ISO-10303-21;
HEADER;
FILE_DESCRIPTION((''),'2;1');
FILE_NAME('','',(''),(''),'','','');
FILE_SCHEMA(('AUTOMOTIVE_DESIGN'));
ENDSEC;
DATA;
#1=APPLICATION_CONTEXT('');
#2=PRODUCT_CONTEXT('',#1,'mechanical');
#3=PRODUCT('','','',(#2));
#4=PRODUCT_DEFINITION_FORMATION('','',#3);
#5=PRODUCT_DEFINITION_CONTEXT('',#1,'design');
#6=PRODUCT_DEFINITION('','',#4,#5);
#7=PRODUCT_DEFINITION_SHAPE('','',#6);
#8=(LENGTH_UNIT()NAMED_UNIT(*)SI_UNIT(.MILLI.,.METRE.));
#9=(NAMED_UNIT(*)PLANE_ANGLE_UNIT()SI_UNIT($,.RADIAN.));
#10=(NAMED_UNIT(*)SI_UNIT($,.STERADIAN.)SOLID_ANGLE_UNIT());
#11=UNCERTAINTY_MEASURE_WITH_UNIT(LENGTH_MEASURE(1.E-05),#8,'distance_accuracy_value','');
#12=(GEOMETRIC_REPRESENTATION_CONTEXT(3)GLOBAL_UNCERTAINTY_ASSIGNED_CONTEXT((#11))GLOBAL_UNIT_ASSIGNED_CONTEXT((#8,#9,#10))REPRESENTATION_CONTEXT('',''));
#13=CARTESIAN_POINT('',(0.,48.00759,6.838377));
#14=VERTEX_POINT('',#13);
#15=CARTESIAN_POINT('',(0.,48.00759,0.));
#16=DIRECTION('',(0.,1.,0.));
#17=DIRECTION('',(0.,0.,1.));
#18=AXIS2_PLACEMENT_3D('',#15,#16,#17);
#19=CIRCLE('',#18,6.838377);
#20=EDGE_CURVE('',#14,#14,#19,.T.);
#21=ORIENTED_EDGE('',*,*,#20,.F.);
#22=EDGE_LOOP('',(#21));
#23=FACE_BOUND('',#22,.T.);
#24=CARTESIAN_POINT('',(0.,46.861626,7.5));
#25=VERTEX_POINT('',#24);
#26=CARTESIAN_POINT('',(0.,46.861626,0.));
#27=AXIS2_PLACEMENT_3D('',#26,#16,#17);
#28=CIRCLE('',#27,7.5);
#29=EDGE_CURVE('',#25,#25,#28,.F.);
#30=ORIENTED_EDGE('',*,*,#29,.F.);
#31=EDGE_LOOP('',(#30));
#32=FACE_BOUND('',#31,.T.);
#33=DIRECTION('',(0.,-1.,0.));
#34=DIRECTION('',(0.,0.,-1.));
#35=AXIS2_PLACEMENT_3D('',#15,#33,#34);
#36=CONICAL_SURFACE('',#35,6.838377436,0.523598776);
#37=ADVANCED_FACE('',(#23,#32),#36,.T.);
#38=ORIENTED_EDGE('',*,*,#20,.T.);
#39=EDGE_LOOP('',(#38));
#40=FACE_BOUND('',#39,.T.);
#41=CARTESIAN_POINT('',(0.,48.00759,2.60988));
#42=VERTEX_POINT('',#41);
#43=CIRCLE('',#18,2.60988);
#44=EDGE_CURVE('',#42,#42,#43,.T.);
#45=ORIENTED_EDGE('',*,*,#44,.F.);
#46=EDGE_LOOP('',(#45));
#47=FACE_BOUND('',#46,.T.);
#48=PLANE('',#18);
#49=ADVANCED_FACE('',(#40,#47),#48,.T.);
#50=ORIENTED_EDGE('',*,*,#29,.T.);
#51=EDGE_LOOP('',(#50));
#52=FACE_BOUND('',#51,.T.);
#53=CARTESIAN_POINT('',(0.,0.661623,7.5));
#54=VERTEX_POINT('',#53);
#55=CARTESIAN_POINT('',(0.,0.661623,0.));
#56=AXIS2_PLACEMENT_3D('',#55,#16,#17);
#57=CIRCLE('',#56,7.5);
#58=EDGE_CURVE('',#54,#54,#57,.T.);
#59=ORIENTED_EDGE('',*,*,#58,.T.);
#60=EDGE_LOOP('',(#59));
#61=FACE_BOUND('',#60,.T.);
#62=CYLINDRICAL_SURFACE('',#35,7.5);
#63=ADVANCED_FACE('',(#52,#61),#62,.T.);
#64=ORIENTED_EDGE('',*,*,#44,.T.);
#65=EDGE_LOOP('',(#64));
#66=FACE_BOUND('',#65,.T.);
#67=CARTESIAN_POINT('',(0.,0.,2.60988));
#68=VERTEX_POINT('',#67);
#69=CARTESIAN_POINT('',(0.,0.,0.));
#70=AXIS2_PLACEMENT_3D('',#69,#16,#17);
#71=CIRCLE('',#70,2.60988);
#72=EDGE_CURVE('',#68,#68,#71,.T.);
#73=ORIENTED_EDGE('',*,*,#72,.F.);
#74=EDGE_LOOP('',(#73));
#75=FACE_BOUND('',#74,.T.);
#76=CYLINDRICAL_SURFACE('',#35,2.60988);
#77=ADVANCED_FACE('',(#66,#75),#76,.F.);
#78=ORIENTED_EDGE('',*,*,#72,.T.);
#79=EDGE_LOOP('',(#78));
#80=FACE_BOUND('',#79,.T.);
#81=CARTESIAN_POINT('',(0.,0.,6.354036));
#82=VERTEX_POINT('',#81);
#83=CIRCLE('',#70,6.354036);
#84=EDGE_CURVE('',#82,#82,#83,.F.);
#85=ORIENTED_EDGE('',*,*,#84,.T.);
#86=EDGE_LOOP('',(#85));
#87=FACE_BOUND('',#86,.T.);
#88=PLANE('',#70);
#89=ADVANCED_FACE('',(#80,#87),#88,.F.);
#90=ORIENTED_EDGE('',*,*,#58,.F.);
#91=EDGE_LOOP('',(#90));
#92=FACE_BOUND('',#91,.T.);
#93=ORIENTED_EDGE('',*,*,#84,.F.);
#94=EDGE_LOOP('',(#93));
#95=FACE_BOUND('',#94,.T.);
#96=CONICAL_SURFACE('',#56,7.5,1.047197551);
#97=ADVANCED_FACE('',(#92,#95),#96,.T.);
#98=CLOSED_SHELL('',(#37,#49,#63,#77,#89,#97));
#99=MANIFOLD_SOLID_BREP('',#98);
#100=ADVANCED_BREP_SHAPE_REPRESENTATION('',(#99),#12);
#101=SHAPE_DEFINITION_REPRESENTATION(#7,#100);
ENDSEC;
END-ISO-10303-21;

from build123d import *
from OCP.BRepFilletAPI import BRepFilletAPI_MakeChamfer

# Parameters (mm, degrees)
SKETCH1_R           = 7.5
BOSS_EXTRUDE1_DEPTH = 48.007590394
SKETCH2_R           = 2.609879689
CUT_EXTRUDE1_DEPTH  = 50.165320455
CHAMFER1_SIZE       = 1.145963896
CHAMFER1_SIZE2      = 0.661622564


with BuildPart() as part:
    # Sketch1 → Boss-Extrude1 (new body)
    with BuildSketch(Plane(origin=(0, 0, 0), x_dir=(1, 0, 0), z_dir=(0, 1, 0))):
        Circle(SKETCH1_R)
    extrude(amount=BOSS_EXTRUDE1_DEPTH)

    # Sketch2 → Cut-Extrude1 (cut, through all)
    with BuildSketch(Plane(origin=(0, 0, 0), x_dir=(1, 0, 0), z_dir=(0, 1, 0))):
        Circle(SKETCH2_R)
    extrude(amount=CUT_EXTRUDE1_DEPTH, mode=Mode.SUBTRACT)

    # Chamfer1: one chamfer whose edges measure the first distance from different faces: ONE call of the kernel's chamfer builder (chamfer() names one face for all edges)
    chamfer1_edges_1 = [part.edges().sort_by_distance(p)[0] for p in [
        (-7.5, 48.007590394, 0),
    ]]
    chamfer1_side_1 = [part.faces().sort_by_distance(p)[0] for p in [
        (-7.5, 24.003795197, 0),
    ]]
    chamfer1_edges_2 = [part.edges().sort_by_distance(p)[0] for p in [
        (-7.5, 0, 0),
    ]]
    chamfer1_side_2 = [part.faces().sort_by_distance(p)[0] for p in [
        (-7.287867966, 0, 0),
    ]]
    chamfer1 = BRepFilletAPI_MakeChamfer(part.part.solid().wrapped)
    for e in chamfer1_edges_1:
        chamfer1.Add(CHAMFER1_SIZE, CHAMFER1_SIZE2, e.wrapped, chamfer1_side_1[0].wrapped)  # the first distance lies on this face
    for e in chamfer1_edges_2:
        chamfer1.Add(CHAMFER1_SIZE, CHAMFER1_SIZE2, e.wrapped, chamfer1_side_2[0].wrapped)  # the first distance lies on this face
    add(Compound.cast(chamfer1.Shape()), mode=Mode.REPLACE)


solid = part.part
